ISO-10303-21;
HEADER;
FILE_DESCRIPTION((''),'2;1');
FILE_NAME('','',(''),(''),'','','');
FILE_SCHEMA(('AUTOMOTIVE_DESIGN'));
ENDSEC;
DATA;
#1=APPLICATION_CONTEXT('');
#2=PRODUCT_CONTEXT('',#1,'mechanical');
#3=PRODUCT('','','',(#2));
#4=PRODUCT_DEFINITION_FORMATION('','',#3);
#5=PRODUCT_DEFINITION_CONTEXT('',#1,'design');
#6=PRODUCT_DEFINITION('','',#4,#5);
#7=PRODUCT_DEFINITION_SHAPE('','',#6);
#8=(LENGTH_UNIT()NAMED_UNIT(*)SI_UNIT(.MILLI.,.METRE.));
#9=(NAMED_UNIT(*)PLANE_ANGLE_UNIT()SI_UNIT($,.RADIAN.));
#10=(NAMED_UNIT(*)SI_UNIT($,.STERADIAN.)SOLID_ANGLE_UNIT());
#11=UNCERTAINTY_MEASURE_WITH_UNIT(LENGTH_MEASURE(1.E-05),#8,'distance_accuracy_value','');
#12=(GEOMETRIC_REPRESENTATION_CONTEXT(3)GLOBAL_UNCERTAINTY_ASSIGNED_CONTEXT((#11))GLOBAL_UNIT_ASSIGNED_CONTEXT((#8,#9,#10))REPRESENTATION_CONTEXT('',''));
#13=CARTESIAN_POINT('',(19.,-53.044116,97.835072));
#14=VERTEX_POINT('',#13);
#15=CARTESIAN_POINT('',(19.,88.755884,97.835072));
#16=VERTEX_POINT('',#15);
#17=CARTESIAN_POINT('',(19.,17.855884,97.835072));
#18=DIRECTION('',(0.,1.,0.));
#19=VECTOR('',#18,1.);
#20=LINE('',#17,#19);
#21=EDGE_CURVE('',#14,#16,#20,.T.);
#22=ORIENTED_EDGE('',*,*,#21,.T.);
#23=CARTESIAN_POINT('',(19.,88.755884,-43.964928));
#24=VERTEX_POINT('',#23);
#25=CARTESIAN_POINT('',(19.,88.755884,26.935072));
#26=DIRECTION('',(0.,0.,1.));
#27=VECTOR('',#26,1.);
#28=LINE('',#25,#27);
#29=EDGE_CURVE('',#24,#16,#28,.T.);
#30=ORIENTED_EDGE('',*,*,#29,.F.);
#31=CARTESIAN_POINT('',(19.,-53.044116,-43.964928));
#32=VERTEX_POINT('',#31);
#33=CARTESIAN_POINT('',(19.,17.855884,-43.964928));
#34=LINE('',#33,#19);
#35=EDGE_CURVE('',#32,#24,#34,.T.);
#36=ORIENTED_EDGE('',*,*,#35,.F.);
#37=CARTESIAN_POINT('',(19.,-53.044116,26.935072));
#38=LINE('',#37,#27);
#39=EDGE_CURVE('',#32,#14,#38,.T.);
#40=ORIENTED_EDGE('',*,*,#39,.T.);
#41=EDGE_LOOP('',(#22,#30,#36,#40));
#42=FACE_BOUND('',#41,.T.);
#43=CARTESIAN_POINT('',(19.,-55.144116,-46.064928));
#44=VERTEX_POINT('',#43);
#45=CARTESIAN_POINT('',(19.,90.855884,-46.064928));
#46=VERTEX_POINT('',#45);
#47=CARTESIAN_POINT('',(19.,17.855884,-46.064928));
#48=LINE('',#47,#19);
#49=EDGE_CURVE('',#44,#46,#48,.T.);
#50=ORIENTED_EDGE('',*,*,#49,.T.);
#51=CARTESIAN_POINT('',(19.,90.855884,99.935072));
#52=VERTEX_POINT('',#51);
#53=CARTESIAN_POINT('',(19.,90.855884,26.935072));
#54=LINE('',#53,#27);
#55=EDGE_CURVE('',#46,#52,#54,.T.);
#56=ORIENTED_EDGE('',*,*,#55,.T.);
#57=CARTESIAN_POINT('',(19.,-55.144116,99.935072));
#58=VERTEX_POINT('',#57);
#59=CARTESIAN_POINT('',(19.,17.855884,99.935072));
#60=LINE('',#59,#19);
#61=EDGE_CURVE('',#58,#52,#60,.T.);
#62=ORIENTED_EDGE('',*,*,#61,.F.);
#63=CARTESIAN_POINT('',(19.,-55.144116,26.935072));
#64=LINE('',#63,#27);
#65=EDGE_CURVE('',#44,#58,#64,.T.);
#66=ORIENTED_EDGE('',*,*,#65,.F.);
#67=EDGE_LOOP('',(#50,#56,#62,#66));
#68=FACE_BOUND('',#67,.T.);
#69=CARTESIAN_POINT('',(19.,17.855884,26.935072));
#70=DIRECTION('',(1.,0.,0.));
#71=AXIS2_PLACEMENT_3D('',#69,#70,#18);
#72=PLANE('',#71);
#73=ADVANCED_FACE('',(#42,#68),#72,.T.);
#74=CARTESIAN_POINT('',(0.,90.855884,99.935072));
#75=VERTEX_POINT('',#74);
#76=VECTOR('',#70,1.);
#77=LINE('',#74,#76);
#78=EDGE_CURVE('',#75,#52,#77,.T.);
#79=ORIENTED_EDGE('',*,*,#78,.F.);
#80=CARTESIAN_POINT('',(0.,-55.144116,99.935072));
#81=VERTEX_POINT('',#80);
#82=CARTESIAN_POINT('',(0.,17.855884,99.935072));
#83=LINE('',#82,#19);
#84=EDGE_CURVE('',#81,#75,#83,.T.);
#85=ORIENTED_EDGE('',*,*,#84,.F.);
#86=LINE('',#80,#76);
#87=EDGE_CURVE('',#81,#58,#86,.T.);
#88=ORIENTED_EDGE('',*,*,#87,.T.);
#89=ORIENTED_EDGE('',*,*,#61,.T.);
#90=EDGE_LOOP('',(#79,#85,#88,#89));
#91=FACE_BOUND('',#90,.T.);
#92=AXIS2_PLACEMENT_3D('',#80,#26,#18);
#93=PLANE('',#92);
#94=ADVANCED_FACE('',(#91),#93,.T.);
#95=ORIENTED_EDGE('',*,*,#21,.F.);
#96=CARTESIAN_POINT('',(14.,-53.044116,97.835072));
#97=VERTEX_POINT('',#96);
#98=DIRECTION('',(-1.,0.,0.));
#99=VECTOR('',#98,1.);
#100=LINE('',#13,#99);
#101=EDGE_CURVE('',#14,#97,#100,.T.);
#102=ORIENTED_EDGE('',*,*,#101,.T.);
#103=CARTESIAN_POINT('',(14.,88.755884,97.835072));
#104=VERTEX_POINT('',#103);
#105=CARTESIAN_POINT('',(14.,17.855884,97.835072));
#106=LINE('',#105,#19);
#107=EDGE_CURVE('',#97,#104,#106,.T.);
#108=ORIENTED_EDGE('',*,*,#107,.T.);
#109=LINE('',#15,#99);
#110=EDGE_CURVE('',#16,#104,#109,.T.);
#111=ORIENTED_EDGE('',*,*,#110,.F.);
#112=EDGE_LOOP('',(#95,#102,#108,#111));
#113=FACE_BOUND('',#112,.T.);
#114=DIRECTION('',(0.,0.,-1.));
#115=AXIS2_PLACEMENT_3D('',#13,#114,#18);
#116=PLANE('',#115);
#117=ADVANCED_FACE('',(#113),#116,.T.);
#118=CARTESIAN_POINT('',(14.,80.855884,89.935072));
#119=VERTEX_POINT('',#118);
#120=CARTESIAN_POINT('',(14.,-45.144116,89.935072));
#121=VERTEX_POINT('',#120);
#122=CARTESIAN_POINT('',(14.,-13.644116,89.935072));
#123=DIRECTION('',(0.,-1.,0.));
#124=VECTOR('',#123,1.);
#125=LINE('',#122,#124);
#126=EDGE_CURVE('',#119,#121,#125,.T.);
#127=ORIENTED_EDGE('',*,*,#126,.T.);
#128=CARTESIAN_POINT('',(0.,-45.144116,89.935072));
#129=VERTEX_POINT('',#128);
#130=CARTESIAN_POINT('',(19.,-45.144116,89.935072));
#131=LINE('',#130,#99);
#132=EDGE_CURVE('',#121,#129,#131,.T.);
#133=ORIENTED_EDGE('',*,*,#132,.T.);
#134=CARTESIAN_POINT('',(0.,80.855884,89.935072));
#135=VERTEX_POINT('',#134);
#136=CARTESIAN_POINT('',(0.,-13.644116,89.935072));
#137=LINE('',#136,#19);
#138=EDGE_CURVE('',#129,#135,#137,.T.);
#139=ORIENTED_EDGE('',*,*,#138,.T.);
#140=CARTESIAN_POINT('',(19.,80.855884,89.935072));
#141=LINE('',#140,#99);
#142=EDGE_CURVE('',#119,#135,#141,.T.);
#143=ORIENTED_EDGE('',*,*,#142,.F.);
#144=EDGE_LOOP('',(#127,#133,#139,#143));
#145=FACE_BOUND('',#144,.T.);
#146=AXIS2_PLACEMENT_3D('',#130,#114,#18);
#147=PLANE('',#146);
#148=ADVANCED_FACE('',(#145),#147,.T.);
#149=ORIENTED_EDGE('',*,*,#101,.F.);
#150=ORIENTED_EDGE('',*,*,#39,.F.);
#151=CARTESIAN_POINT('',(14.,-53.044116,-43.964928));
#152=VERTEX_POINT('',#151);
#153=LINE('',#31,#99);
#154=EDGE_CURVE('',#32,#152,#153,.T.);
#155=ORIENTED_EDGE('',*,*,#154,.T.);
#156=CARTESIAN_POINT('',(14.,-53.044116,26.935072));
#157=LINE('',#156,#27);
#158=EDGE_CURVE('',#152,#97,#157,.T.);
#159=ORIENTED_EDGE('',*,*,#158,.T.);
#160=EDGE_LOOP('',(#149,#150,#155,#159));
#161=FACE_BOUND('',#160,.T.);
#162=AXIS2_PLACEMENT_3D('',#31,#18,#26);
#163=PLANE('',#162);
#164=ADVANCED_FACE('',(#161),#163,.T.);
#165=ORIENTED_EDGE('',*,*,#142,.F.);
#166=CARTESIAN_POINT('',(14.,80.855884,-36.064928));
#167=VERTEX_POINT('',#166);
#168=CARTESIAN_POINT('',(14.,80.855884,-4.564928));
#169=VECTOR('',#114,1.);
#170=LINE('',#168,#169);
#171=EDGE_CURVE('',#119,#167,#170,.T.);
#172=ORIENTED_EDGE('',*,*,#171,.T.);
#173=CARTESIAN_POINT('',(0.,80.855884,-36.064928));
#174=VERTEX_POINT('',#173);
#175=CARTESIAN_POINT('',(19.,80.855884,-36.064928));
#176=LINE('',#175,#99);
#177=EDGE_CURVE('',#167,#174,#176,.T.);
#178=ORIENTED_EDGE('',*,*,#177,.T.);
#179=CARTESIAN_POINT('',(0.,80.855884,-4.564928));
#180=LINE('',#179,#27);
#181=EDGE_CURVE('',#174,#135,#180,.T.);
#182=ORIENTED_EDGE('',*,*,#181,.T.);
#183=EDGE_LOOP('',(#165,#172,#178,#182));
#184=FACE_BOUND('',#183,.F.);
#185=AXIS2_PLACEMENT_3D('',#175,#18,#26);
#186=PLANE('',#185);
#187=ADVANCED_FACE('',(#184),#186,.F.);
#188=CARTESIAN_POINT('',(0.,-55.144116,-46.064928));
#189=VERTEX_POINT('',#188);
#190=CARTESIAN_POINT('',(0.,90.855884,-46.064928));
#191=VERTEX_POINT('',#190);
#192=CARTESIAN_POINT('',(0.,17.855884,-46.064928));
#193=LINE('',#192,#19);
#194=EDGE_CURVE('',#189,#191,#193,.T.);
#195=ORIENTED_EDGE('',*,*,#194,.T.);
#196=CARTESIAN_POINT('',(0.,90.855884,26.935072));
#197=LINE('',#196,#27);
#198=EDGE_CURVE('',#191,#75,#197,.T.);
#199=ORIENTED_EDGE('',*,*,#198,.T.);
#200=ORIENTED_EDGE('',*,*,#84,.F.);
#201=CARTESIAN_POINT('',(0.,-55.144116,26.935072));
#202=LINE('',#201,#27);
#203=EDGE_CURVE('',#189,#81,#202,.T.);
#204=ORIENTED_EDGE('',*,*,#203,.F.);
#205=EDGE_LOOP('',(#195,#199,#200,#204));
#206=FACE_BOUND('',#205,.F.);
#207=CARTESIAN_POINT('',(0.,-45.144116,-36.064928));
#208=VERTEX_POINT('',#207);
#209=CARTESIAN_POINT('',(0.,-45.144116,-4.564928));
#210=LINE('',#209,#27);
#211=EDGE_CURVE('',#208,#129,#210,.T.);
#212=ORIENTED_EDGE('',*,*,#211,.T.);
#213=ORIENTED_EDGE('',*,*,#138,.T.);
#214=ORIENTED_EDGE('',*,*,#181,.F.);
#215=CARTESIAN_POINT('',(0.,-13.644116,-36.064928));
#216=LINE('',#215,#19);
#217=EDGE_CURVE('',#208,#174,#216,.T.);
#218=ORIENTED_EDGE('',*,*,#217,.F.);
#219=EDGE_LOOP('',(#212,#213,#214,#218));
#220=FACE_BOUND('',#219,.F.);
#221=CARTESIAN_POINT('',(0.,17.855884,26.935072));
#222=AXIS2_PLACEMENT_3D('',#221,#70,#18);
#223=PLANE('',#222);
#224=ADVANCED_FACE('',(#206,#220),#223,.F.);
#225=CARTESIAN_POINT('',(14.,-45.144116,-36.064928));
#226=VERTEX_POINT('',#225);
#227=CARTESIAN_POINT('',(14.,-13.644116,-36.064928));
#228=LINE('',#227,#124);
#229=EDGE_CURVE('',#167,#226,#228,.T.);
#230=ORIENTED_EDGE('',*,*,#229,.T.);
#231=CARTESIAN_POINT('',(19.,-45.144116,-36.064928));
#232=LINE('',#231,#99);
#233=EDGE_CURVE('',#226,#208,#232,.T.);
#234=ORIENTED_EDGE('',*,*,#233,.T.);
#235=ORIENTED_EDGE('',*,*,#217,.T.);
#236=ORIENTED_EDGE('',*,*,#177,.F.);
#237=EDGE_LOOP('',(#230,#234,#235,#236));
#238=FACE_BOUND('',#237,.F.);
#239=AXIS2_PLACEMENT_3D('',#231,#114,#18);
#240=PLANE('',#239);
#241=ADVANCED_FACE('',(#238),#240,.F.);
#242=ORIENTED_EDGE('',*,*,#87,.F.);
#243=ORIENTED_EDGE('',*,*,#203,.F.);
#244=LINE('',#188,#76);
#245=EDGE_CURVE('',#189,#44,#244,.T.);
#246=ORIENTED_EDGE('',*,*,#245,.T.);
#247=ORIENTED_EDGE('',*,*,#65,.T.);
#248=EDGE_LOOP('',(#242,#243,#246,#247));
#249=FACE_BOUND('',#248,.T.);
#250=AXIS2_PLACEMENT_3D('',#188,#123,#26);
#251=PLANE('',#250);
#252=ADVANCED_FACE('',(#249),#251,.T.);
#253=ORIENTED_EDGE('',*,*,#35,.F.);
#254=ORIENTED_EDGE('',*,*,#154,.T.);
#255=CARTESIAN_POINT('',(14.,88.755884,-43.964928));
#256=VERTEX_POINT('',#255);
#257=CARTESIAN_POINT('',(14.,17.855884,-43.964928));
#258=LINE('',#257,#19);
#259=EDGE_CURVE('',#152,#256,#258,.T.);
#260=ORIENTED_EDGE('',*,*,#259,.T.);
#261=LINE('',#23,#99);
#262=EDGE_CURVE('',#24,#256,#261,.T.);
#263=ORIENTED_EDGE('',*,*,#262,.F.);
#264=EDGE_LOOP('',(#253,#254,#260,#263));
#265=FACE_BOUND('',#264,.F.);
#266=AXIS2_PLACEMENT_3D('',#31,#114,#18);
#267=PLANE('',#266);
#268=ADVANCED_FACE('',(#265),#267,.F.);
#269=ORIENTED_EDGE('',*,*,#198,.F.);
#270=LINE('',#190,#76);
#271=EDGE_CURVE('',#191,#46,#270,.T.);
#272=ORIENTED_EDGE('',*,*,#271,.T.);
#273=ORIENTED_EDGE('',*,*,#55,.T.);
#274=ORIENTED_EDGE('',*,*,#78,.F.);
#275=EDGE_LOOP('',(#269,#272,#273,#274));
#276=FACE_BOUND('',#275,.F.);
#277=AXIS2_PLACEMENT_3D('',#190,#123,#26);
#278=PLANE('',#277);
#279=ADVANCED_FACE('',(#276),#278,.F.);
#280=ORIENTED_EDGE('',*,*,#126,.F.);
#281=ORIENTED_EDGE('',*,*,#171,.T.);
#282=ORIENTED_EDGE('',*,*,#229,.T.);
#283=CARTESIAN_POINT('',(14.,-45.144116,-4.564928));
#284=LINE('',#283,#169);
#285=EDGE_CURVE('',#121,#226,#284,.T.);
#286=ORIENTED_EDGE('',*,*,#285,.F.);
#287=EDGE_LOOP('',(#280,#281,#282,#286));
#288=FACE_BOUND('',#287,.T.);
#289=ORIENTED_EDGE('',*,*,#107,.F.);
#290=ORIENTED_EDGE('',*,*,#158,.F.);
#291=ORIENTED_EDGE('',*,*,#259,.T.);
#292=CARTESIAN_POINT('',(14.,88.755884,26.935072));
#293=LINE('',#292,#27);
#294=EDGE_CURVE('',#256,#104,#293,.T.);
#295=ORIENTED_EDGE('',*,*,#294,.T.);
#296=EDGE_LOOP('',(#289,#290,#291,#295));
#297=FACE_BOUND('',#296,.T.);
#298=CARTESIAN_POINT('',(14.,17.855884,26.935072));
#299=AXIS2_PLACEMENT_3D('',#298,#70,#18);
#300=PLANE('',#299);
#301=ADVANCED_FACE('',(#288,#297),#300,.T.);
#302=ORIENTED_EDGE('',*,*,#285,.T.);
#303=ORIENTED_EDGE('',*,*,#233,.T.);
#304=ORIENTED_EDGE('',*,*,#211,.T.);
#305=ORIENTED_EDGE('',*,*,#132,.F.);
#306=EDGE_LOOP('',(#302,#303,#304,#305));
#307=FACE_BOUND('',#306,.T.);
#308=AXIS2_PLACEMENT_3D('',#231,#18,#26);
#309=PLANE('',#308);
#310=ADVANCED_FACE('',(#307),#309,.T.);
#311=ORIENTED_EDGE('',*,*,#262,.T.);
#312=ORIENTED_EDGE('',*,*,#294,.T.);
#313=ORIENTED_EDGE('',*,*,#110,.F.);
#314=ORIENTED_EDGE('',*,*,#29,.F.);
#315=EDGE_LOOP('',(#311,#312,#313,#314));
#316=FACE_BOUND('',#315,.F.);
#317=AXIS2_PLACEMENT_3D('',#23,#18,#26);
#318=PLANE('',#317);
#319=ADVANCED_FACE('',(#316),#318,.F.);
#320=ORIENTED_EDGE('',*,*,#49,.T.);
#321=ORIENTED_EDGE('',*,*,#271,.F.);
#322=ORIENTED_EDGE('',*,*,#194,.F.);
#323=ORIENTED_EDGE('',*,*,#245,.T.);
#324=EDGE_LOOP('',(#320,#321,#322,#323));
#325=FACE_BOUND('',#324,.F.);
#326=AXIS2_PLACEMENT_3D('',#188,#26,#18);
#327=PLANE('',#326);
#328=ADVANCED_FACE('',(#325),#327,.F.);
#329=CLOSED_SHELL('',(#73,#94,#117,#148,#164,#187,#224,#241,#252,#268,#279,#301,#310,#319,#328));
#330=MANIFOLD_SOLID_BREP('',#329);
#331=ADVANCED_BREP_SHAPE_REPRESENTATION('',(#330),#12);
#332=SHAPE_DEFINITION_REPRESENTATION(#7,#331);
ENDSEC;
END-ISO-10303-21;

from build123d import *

# Parameters (mm, degrees)
F0_W     = 146
F0_H     = 146
F1_DEPTH = 19
F2_W     = 126
F2_H     = 126
F3_DEPTH = 25
F4_W     = 141.8
F4_H     = 141.8
F5_DEPTH = 5


# Not quite as in the source:
# - a feature names something its author has since deleted; it is built from what else it names


with BuildPart() as f1:
    # F0 (on Right) → F1 (new body)
    with BuildSketch(Plane.YZ):
        with Locations((17.8558837175, 26.935071826)):
            Rectangle(F0_W, F0_H)
    extrude(amount=F1_DEPTH)

    # F2 (on face) → F3 (cut)
    with BuildSketch(Plane.YZ.offset(19)):
        with Locations((17.8558837175, 26.935071826)):
            Rectangle(F2_W, F2_H)
    extrude(amount=-F3_DEPTH, mode=Mode.SUBTRACT)

    # F4 (on face) → F5 (cut)
    with BuildSketch(Plane.YZ.offset(19)):
        with Locations((17.8558837175, 26.935071826)):
            Rectangle(F4_W, F4_H)
    extrude(amount=-F5_DEPTH, mode=Mode.SUBTRACT)


solid = f1.part
